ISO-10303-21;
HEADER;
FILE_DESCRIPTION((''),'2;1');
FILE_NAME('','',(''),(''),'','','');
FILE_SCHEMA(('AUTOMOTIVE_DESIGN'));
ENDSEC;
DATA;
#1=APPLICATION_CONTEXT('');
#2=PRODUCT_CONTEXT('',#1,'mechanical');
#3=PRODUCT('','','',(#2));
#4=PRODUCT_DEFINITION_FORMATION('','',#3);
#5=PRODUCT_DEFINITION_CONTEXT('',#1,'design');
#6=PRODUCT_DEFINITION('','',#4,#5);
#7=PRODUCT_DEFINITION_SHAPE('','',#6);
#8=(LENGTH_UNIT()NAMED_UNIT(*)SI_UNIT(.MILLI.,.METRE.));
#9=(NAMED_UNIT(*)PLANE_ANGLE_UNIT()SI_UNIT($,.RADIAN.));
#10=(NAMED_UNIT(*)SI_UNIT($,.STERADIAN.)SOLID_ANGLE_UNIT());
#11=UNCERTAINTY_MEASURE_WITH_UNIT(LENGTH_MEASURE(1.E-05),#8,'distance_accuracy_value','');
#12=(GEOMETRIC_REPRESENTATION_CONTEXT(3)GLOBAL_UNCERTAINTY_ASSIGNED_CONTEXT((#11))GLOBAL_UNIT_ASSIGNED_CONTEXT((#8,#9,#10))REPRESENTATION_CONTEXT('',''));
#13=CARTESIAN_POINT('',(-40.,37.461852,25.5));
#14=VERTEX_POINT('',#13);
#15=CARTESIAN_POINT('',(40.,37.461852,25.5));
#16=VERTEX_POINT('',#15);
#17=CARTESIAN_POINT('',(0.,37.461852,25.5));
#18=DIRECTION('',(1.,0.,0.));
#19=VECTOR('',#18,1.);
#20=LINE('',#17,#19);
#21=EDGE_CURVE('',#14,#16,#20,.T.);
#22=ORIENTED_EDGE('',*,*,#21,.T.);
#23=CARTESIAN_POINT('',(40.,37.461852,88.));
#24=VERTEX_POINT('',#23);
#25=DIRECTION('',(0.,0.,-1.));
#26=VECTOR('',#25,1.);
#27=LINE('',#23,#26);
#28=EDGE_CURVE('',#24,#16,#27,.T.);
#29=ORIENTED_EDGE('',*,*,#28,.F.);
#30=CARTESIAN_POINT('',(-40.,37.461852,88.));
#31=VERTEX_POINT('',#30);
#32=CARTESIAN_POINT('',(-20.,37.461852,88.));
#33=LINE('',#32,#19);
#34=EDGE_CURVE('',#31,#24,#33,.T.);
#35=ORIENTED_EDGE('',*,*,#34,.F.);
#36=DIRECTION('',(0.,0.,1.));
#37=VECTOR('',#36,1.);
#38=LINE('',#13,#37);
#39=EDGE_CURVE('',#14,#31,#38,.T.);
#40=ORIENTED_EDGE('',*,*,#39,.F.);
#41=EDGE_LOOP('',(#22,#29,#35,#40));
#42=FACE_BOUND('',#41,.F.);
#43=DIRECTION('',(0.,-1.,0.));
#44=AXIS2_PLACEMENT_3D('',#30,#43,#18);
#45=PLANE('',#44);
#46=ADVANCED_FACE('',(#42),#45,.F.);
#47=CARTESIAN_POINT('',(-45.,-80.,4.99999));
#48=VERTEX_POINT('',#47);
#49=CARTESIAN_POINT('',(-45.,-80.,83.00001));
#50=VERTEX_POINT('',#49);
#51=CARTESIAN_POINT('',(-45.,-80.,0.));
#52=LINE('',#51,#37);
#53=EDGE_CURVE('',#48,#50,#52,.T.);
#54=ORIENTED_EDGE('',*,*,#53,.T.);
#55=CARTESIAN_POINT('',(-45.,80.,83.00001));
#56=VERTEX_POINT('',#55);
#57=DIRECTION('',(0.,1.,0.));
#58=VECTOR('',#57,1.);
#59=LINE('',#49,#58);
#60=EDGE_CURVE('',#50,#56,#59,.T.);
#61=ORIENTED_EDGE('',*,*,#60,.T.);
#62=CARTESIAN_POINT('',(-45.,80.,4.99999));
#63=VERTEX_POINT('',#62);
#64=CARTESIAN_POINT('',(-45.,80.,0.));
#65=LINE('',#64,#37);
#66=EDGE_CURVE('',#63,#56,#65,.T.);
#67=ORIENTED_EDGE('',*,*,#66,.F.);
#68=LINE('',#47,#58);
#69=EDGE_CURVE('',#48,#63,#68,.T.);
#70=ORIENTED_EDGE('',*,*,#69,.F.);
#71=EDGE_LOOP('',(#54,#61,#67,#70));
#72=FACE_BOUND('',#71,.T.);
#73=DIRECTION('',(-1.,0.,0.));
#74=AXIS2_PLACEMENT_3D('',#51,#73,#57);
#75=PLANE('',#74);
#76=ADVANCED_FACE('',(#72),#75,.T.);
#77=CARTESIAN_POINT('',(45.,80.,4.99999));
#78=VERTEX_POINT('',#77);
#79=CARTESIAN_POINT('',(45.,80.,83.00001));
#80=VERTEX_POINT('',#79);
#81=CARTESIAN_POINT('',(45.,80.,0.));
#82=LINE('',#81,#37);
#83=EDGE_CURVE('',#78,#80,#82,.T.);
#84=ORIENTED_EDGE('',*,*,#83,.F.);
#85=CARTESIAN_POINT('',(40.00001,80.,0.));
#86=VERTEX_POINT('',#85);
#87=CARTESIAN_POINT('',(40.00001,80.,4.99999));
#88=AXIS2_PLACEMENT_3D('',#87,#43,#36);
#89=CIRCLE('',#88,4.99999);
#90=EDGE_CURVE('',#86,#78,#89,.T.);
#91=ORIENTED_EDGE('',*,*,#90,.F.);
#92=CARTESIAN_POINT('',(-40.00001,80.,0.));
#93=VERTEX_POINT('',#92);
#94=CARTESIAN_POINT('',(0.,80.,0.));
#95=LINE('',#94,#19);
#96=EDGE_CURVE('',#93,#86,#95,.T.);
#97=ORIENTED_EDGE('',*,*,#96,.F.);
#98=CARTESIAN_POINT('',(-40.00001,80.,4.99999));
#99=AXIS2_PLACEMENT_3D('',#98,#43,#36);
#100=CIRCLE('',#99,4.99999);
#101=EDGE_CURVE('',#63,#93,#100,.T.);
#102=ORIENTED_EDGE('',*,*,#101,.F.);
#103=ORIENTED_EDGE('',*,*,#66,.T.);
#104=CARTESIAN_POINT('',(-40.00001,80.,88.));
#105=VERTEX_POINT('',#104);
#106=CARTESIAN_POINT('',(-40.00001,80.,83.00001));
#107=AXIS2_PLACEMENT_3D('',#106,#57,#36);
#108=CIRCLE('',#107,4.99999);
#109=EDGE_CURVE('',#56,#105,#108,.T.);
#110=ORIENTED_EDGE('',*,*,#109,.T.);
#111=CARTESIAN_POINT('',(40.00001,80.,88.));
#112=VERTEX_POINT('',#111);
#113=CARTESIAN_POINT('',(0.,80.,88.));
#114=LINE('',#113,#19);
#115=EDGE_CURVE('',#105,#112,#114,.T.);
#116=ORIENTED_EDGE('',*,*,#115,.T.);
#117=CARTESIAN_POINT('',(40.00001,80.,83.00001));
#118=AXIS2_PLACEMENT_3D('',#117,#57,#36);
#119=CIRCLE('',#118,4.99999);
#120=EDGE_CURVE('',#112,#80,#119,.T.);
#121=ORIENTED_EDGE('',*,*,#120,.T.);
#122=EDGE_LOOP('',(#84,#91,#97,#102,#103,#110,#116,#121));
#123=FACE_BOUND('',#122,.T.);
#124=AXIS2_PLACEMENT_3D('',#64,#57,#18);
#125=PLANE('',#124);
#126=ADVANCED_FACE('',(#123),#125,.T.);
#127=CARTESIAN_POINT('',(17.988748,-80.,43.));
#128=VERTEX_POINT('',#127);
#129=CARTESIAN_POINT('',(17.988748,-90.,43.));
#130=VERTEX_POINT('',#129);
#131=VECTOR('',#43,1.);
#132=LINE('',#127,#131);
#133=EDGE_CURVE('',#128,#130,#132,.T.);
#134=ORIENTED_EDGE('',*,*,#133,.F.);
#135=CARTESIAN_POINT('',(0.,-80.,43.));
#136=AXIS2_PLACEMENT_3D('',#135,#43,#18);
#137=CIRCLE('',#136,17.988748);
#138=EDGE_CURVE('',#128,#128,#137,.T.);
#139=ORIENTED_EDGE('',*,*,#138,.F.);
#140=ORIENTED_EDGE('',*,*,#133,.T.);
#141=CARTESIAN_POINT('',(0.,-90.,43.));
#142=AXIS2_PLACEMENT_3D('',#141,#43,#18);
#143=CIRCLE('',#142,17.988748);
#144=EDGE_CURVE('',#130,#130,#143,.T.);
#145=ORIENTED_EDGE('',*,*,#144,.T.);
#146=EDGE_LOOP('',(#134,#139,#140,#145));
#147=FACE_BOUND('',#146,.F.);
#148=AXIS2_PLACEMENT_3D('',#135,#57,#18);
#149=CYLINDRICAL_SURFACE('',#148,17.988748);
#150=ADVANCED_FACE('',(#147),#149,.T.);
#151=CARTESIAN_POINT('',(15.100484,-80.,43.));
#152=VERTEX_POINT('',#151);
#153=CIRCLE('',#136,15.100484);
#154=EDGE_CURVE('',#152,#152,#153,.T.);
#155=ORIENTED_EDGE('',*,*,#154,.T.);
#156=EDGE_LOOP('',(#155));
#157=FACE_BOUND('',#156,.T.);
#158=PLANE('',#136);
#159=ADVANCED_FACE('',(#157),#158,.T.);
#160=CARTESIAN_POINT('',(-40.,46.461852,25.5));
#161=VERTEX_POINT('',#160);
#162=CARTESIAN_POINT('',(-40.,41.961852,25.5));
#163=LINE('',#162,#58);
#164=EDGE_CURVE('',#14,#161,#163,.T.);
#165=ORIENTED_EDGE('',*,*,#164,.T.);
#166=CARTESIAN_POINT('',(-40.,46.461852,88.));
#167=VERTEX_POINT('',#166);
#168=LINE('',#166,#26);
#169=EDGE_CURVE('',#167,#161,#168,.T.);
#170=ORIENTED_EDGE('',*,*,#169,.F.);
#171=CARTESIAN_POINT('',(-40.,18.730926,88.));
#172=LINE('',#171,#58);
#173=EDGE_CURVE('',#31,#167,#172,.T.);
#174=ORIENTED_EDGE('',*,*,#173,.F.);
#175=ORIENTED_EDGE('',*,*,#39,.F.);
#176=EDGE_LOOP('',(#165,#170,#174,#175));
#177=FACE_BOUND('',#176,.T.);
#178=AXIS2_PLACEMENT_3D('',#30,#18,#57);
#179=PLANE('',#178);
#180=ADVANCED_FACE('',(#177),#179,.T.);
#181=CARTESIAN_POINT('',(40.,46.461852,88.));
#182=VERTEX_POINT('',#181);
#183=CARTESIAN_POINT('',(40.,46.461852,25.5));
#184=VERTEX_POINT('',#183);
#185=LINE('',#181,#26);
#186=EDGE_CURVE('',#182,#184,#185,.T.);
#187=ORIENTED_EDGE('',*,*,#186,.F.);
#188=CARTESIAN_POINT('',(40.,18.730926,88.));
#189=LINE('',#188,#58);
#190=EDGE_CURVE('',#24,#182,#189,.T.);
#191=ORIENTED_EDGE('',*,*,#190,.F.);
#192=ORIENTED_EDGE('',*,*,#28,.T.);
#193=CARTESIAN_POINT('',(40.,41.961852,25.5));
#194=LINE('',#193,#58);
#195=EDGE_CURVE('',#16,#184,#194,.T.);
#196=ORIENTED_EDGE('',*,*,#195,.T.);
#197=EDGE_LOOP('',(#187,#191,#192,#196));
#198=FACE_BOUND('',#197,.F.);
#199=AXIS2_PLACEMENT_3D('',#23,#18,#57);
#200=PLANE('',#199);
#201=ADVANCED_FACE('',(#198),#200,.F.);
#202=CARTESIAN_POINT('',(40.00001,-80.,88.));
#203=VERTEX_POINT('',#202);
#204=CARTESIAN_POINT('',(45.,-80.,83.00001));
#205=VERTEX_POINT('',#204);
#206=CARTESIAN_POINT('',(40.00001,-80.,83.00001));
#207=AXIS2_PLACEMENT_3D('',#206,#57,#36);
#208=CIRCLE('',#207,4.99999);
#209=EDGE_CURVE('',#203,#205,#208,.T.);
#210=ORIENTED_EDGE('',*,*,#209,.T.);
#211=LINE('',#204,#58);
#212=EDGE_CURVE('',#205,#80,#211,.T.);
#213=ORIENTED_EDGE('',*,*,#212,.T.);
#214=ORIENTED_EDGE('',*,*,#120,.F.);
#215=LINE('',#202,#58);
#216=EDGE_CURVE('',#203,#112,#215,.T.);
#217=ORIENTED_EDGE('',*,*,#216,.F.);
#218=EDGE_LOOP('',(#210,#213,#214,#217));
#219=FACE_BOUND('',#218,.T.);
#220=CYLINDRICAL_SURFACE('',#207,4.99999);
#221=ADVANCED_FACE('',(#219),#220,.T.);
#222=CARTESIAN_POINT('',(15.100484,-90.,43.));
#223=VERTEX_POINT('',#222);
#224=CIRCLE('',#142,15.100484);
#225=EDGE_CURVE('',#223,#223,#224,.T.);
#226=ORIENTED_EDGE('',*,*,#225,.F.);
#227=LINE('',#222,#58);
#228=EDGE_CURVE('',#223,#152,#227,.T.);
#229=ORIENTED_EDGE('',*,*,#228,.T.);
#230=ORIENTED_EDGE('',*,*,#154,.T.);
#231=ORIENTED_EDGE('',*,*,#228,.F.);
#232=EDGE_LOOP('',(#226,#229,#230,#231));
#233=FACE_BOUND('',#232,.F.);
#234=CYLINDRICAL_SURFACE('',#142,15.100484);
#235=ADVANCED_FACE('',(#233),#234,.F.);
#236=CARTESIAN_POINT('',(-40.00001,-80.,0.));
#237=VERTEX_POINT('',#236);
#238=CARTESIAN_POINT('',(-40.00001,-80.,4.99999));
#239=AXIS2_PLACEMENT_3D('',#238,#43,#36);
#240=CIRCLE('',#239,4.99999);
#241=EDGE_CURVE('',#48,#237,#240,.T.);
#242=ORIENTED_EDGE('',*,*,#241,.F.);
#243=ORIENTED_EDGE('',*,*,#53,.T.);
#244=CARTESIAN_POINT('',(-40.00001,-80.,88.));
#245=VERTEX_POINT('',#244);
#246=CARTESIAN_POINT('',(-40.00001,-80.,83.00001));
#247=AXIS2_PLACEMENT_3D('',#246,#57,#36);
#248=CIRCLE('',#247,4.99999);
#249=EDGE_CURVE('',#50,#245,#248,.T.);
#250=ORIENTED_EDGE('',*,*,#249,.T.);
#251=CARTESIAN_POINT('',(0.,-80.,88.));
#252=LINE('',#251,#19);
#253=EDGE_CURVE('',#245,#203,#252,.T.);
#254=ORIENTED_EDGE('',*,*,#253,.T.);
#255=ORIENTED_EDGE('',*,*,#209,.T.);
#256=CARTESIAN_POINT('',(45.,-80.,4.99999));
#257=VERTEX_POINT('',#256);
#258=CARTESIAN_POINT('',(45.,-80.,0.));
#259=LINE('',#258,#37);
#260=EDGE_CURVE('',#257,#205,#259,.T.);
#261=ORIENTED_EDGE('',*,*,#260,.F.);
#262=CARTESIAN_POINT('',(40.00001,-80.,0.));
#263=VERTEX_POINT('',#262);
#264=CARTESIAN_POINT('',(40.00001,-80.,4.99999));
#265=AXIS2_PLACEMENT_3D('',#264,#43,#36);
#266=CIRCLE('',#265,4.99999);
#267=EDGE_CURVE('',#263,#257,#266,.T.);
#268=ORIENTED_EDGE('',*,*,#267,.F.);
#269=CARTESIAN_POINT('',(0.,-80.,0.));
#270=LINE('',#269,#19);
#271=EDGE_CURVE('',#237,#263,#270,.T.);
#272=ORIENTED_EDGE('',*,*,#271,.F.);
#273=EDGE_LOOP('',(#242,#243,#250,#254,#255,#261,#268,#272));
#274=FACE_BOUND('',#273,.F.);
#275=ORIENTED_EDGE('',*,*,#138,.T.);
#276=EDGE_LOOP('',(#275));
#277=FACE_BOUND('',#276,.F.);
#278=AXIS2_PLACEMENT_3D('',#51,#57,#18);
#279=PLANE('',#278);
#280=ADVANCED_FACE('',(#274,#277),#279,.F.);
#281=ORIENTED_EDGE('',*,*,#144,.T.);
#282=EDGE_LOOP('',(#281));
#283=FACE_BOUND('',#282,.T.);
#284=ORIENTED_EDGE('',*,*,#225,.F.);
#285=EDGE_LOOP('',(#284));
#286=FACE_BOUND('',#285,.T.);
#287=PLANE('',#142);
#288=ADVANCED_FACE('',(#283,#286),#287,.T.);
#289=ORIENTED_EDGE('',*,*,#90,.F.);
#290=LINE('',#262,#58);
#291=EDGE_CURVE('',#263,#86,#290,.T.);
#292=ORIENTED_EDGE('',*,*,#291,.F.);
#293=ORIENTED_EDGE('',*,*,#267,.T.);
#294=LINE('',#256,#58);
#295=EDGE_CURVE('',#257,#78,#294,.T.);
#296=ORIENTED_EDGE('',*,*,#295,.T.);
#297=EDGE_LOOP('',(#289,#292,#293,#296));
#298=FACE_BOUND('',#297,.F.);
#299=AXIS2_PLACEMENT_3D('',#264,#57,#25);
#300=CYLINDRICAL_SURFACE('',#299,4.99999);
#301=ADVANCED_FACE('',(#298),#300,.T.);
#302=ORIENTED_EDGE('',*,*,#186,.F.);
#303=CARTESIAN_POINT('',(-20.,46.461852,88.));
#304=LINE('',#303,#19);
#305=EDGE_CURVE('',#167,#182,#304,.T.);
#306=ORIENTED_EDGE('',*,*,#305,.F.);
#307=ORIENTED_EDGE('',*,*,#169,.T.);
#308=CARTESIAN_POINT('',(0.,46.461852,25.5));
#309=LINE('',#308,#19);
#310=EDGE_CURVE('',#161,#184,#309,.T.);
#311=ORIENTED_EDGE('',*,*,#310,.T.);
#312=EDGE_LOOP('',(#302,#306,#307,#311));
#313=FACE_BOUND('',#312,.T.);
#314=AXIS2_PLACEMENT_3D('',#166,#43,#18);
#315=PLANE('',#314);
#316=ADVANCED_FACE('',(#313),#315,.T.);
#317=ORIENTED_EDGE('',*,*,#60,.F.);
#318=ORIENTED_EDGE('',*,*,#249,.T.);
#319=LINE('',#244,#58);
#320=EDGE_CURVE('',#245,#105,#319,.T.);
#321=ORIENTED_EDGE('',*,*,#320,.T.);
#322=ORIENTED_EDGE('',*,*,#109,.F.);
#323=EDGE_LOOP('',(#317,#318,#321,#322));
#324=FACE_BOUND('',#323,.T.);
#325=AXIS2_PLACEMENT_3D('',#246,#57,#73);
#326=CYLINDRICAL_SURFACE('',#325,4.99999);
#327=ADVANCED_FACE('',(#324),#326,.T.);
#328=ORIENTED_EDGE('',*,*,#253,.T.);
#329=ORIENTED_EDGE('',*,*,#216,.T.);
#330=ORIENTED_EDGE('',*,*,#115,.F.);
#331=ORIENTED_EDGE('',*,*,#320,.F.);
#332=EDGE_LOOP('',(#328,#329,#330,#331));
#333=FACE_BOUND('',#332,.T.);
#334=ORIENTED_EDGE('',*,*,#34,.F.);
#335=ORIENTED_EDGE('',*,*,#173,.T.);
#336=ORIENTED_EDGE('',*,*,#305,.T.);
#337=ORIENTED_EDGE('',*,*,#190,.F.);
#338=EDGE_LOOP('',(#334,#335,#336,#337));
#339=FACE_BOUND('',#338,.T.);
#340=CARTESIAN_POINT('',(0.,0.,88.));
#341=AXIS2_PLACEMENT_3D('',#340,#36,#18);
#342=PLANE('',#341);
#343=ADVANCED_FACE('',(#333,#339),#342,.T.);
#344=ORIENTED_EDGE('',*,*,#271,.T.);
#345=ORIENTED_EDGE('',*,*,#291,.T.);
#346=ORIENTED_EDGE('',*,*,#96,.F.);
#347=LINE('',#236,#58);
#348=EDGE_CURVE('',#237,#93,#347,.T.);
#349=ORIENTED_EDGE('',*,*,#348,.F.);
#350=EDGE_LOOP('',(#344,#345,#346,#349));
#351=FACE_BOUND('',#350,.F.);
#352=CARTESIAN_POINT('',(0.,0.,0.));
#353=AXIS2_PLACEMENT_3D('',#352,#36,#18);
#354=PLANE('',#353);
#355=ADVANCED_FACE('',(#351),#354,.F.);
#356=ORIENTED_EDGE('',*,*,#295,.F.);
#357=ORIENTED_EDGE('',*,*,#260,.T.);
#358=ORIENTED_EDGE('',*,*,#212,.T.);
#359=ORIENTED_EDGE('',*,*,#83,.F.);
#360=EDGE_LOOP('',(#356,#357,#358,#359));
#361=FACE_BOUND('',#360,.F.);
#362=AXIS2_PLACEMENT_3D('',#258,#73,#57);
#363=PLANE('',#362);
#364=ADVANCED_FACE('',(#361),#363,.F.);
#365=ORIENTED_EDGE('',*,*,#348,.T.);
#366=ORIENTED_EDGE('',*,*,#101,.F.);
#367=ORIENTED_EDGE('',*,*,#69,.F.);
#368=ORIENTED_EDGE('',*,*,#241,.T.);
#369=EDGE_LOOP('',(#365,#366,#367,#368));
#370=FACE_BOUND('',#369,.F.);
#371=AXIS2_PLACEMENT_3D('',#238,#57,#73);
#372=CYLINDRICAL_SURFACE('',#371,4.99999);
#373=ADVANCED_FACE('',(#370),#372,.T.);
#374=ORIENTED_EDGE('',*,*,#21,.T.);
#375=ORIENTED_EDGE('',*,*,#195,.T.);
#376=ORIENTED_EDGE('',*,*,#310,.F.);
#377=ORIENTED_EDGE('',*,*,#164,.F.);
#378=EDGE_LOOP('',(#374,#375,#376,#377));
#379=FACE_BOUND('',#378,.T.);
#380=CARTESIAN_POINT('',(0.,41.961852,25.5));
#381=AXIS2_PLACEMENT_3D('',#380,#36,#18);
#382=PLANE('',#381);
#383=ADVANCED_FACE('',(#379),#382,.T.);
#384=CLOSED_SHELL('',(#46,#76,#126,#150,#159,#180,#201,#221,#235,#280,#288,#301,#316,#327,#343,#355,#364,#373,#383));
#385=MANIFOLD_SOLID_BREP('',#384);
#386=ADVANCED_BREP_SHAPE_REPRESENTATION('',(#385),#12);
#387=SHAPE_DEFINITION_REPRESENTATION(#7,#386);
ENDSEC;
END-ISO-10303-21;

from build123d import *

# Parameters (mm, degrees)
F0_W     = 90
F0_H     = 160
F1_DEPTH = 88
F2_W     = 80
F2_H     = 9
F3_DEPTH = 12.5
F4_DEPTH = 50
F5_R     = 17.988747928
F6_DEPTH = 10
F7_R     = 15.1004844519
F8_DEPTH = 10
F9_R     = 4.99999


# Not quite as in the source:
# - a fillet or chamfer is up to 0.001 mm smaller than in the source, because OpenCascade refuses the exact size


with BuildPart() as f1:
    # F0 (on Top) → F1 (new body)
    with BuildSketch(Plane.XY):
        Rectangle(F0_W, F0_H)
    extrude(amount=F1_DEPTH)

    # F2 (on face) → F3 (cut, symmetric)
    with BuildSketch(Plane.XY.offset(88)):
        with Locations((0, 41.9618518679)):
            Rectangle(F2_W, F2_H)
    extrude(amount=F3_DEPTH, both=True, mode=Mode.SUBTRACT)

    # F4 (cut): a face of the model
    f4_faces = [f1.faces().sort_by_distance(p)[0] for p in [
        (0, 41.9618518679, 75.5),
    ]]
    extrude(f4_faces, amount=-F4_DEPTH, mode=Mode.SUBTRACT)

    # F5 (on face) → F6 (join)
    with BuildSketch(Plane.XZ.offset(80)):
        with Locations((0, 43)):
            Circle(F5_R)
    extrude(amount=F6_DEPTH)

    # F7 (on face) → F8 (cut)
    with BuildSketch(Plane.XZ.offset(90)):
        with Locations((0, 43)):
            Circle(F7_R)
    extrude(amount=-F8_DEPTH, mode=Mode.SUBTRACT)

    # F9 (radius 5 in the source; OpenCascade refuses exactly that, so slightly less here)
    f9_edges = [f1.edges().sort_by_distance(p)[0] for p in [
        (-45, 0, 88),
        (45, 0, 88),
        (45, 0, 0),
        (-45, 0, 0),
    ]]
    fillet(f9_edges, radius=F9_R)


solid = f1.part
